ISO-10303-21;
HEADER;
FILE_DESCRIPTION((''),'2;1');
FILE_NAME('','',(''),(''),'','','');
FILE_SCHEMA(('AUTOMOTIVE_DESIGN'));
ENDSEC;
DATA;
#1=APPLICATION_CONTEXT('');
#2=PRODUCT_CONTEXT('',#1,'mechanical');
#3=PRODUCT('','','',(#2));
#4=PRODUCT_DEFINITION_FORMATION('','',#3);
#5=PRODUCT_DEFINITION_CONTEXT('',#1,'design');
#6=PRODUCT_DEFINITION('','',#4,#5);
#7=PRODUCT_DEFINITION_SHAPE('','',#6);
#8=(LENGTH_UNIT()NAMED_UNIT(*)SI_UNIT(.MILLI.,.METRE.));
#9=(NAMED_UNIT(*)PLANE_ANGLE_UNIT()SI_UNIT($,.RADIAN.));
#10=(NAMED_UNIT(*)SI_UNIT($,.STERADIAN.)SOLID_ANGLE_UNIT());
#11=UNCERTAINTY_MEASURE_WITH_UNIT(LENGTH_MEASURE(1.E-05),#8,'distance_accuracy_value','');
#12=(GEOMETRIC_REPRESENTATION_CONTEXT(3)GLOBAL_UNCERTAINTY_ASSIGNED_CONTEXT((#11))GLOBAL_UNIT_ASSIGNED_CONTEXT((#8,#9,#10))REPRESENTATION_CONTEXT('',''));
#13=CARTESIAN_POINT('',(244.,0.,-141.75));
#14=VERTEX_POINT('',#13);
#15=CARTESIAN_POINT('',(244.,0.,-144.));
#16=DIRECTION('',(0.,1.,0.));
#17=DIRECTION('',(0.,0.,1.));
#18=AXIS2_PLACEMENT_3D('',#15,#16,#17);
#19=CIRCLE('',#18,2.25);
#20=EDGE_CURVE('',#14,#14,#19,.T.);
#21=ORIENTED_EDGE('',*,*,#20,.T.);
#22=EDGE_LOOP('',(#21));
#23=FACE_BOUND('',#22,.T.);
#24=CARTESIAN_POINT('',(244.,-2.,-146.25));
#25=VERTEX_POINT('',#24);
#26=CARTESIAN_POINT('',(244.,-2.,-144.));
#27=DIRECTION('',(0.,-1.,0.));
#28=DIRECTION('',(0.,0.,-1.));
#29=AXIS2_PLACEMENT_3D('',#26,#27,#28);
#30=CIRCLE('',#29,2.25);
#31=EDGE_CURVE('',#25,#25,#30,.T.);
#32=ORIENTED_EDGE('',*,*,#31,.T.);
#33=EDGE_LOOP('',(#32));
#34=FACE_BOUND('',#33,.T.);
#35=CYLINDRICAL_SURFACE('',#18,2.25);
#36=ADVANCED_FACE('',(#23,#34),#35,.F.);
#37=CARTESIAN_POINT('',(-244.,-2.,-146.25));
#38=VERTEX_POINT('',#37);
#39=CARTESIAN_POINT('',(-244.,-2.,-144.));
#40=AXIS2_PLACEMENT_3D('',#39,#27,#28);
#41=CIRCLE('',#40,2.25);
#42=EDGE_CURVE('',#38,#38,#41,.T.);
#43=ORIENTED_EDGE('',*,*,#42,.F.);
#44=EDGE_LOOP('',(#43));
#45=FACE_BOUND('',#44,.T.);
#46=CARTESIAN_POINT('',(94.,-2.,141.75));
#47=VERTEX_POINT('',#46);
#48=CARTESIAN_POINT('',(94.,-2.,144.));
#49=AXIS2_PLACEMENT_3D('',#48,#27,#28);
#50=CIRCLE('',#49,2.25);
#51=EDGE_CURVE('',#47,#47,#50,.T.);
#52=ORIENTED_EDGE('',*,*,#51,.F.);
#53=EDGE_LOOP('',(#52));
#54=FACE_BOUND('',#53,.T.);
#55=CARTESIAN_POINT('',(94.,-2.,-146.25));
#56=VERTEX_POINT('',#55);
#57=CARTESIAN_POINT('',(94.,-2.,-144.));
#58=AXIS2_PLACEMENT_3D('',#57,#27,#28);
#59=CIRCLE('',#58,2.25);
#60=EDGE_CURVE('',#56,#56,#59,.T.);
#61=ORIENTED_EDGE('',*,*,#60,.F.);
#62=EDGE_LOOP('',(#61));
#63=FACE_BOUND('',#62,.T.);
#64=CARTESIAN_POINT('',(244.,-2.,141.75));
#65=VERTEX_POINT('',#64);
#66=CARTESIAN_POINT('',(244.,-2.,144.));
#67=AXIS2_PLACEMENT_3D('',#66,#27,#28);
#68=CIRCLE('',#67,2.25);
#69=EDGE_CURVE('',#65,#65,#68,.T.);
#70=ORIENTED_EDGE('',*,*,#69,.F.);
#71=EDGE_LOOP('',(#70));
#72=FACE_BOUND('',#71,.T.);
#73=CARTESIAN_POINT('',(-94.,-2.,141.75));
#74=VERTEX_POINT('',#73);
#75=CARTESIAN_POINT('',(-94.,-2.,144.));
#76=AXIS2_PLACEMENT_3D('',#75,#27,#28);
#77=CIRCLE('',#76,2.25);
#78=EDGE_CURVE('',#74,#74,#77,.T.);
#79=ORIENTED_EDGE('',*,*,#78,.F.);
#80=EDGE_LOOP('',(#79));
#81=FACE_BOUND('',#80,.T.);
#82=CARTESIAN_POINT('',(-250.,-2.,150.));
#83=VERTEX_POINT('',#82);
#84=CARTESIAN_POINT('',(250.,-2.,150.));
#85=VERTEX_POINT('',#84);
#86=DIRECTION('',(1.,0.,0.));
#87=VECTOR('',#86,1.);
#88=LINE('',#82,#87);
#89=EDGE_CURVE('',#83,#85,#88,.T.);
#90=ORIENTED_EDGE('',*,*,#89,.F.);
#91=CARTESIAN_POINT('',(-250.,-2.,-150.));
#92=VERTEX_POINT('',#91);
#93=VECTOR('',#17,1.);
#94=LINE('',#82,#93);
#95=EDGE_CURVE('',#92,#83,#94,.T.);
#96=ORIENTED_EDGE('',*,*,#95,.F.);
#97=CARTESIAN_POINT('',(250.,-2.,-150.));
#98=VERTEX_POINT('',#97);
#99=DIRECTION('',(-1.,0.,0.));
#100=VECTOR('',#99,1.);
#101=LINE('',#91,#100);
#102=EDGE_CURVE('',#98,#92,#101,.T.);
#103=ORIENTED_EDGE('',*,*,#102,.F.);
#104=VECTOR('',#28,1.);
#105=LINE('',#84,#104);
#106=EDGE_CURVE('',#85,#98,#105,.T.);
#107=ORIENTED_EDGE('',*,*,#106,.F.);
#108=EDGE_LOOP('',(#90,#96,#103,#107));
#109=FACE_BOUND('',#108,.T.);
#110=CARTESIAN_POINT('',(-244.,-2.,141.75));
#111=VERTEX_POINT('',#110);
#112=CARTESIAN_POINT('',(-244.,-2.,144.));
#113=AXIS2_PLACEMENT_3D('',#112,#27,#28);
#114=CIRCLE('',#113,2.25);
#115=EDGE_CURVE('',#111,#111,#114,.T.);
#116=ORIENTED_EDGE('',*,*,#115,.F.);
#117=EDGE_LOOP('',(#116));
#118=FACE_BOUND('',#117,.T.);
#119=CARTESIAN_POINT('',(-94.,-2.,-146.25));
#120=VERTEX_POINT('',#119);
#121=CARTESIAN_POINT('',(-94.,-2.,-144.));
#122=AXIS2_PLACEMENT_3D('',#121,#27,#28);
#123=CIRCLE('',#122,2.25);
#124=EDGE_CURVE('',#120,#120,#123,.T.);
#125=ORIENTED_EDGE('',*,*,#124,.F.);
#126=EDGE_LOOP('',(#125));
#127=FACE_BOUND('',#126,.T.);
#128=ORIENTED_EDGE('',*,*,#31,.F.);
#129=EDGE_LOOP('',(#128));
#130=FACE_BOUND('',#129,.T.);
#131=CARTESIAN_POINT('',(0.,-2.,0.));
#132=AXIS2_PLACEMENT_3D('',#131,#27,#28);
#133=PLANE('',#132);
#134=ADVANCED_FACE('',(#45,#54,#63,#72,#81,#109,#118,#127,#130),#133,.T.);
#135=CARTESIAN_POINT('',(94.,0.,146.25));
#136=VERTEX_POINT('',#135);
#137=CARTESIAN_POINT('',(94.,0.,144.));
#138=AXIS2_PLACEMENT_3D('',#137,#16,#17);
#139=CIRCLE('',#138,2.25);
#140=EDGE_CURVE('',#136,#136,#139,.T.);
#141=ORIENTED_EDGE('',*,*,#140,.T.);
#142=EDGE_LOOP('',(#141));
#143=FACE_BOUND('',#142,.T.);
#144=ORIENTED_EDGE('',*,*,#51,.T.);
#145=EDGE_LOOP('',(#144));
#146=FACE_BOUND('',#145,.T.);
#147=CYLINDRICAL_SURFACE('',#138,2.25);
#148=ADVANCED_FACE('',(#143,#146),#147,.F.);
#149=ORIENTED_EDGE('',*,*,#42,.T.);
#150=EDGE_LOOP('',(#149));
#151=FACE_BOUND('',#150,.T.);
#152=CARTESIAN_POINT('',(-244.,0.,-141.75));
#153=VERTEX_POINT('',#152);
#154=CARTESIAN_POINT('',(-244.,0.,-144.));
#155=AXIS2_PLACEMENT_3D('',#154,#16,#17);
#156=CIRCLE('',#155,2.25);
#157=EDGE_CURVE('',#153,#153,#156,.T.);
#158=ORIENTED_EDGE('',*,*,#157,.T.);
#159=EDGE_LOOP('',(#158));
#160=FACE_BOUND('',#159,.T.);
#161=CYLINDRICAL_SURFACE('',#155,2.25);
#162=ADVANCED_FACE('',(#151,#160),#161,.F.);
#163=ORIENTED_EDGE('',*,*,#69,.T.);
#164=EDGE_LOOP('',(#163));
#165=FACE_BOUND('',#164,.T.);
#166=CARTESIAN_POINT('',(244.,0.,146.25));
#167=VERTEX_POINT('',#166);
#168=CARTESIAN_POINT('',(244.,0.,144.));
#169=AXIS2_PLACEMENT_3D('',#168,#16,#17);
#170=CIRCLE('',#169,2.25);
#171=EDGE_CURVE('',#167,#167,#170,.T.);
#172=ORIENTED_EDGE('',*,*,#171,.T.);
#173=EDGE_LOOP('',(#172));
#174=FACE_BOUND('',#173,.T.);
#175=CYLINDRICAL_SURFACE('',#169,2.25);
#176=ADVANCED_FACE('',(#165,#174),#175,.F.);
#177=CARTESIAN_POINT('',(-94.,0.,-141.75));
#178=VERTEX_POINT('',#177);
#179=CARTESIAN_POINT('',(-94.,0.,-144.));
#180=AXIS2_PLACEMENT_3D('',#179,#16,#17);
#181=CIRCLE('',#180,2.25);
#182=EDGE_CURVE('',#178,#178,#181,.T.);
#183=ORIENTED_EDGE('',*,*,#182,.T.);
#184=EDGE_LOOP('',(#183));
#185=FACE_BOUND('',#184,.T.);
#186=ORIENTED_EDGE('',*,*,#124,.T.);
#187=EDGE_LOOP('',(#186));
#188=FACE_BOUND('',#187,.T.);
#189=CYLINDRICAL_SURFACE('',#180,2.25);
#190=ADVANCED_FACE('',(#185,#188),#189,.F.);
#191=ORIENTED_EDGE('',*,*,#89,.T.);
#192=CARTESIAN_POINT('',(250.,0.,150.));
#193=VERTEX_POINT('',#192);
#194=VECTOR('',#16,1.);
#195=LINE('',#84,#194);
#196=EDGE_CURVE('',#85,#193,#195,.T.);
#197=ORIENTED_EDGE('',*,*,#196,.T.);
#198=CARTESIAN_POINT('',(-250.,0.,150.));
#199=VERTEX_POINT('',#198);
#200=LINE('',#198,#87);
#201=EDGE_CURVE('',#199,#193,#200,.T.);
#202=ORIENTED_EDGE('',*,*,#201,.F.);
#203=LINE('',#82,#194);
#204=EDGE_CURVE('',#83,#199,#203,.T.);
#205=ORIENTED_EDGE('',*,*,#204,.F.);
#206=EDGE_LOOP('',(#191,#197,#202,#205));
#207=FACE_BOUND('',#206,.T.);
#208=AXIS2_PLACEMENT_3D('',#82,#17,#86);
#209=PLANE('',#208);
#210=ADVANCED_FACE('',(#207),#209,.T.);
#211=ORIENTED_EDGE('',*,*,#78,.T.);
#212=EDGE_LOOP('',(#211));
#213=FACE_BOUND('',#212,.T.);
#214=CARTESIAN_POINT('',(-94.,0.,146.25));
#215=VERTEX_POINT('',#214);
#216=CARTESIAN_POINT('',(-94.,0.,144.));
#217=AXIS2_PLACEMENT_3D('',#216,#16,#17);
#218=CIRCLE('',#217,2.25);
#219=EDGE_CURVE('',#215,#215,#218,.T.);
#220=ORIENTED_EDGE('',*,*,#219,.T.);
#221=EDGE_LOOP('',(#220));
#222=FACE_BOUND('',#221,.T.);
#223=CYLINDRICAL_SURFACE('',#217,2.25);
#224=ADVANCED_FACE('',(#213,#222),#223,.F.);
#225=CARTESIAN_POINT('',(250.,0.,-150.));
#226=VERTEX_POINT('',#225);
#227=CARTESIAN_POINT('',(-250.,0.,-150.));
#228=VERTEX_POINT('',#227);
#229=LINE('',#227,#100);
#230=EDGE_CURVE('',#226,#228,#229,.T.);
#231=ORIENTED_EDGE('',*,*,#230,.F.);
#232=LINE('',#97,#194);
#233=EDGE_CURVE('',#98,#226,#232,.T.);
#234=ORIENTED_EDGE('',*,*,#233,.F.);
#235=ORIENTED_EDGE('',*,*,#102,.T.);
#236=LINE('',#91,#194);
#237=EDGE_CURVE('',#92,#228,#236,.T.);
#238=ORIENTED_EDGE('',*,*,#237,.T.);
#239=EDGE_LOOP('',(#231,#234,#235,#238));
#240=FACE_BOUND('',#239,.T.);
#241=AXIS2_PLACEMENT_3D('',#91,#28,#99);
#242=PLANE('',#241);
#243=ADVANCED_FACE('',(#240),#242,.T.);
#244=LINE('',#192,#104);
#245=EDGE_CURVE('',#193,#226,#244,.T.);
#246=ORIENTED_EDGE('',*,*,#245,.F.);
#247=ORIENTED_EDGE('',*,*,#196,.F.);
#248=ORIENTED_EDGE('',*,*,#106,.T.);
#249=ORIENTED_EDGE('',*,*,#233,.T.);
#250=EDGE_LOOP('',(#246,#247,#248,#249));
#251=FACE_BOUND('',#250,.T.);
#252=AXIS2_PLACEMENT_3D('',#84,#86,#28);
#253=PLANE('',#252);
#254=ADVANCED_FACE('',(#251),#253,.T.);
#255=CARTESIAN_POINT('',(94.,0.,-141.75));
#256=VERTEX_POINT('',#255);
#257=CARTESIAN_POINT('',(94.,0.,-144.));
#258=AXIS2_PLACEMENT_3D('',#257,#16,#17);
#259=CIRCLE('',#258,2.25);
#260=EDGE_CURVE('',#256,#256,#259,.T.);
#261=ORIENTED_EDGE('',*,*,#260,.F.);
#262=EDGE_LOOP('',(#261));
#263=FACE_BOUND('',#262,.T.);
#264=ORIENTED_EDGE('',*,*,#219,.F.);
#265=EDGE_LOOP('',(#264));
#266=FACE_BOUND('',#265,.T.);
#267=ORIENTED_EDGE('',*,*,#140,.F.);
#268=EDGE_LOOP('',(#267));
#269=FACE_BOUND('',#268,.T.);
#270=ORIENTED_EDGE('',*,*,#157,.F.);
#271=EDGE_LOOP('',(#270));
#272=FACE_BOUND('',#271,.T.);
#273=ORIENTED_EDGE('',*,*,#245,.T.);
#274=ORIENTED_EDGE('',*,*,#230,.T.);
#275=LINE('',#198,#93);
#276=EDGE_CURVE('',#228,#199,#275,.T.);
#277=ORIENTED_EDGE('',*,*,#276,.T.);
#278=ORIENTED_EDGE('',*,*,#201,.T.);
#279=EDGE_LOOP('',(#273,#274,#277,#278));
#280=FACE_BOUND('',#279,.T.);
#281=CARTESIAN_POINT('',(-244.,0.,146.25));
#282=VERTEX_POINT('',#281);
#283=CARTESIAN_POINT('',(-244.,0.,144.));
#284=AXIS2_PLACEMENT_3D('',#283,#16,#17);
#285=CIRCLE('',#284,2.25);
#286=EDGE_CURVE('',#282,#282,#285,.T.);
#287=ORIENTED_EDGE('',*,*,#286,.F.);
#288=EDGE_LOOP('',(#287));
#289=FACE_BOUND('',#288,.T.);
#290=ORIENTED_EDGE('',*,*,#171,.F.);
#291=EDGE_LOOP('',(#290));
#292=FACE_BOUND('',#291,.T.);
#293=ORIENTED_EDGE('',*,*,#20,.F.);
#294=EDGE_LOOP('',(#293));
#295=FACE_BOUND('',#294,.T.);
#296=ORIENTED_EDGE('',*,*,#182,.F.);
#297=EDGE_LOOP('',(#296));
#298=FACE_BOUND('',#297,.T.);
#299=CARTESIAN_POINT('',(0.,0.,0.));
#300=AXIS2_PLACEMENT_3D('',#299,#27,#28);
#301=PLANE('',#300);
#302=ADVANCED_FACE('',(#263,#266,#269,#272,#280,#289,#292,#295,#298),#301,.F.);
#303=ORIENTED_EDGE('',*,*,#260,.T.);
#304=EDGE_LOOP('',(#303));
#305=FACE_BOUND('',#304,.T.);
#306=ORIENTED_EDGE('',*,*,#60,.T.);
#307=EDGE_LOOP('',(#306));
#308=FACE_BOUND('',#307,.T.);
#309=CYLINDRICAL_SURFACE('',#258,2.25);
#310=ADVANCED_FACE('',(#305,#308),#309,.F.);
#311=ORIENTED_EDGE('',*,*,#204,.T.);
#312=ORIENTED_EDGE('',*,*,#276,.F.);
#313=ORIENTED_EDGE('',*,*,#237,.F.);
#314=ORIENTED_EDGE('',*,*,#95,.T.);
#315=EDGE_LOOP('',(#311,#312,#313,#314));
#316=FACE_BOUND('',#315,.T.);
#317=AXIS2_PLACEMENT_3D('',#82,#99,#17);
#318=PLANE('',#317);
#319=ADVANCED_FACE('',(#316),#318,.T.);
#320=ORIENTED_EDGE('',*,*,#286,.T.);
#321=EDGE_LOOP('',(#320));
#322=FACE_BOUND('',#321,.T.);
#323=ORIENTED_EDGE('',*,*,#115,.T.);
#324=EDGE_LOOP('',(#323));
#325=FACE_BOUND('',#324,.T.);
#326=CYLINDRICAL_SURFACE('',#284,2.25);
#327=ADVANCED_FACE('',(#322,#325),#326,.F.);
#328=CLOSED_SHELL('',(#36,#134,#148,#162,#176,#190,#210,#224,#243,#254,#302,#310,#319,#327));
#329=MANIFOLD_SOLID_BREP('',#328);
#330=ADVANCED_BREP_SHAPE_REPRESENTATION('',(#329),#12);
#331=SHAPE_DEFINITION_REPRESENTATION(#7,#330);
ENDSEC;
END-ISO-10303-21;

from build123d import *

# Parameters (mm, degrees)
SKETCH1_W            = 500
SKETCH1_H            = 300
BASE_FLANGE1_DEPTH   = 2
M4_CLEARANCE_HOLE1_D = 4.5


# Sheet-metal steps are written as plain solids
with BuildPart() as part:
    # Sketch1 → Base-Flange1 (new body)
    with BuildSketch(Plane(origin=(0, 0, 0), x_dir=(1, 0, 0), z_dir=(0, 1, 0))):
        Rectangle(SKETCH1_W, SKETCH1_H)
    extrude(amount=-BASE_FLANGE1_DEPTH)

    # M4 Clearance Hole1 (through all)
    with Locations(Plane(origin=(0, 0, 0), x_dir=(1, 0, 0), z_dir=(0, 1, 0))):
        with Locations((244, 144), (94, 144), (-94, 144), (-244, 144), (-244, -144), (-94, -144), (94, -144), (244, -144)):
            Hole(M4_CLEARANCE_HOLE1_D / 2)


solid = part.part
